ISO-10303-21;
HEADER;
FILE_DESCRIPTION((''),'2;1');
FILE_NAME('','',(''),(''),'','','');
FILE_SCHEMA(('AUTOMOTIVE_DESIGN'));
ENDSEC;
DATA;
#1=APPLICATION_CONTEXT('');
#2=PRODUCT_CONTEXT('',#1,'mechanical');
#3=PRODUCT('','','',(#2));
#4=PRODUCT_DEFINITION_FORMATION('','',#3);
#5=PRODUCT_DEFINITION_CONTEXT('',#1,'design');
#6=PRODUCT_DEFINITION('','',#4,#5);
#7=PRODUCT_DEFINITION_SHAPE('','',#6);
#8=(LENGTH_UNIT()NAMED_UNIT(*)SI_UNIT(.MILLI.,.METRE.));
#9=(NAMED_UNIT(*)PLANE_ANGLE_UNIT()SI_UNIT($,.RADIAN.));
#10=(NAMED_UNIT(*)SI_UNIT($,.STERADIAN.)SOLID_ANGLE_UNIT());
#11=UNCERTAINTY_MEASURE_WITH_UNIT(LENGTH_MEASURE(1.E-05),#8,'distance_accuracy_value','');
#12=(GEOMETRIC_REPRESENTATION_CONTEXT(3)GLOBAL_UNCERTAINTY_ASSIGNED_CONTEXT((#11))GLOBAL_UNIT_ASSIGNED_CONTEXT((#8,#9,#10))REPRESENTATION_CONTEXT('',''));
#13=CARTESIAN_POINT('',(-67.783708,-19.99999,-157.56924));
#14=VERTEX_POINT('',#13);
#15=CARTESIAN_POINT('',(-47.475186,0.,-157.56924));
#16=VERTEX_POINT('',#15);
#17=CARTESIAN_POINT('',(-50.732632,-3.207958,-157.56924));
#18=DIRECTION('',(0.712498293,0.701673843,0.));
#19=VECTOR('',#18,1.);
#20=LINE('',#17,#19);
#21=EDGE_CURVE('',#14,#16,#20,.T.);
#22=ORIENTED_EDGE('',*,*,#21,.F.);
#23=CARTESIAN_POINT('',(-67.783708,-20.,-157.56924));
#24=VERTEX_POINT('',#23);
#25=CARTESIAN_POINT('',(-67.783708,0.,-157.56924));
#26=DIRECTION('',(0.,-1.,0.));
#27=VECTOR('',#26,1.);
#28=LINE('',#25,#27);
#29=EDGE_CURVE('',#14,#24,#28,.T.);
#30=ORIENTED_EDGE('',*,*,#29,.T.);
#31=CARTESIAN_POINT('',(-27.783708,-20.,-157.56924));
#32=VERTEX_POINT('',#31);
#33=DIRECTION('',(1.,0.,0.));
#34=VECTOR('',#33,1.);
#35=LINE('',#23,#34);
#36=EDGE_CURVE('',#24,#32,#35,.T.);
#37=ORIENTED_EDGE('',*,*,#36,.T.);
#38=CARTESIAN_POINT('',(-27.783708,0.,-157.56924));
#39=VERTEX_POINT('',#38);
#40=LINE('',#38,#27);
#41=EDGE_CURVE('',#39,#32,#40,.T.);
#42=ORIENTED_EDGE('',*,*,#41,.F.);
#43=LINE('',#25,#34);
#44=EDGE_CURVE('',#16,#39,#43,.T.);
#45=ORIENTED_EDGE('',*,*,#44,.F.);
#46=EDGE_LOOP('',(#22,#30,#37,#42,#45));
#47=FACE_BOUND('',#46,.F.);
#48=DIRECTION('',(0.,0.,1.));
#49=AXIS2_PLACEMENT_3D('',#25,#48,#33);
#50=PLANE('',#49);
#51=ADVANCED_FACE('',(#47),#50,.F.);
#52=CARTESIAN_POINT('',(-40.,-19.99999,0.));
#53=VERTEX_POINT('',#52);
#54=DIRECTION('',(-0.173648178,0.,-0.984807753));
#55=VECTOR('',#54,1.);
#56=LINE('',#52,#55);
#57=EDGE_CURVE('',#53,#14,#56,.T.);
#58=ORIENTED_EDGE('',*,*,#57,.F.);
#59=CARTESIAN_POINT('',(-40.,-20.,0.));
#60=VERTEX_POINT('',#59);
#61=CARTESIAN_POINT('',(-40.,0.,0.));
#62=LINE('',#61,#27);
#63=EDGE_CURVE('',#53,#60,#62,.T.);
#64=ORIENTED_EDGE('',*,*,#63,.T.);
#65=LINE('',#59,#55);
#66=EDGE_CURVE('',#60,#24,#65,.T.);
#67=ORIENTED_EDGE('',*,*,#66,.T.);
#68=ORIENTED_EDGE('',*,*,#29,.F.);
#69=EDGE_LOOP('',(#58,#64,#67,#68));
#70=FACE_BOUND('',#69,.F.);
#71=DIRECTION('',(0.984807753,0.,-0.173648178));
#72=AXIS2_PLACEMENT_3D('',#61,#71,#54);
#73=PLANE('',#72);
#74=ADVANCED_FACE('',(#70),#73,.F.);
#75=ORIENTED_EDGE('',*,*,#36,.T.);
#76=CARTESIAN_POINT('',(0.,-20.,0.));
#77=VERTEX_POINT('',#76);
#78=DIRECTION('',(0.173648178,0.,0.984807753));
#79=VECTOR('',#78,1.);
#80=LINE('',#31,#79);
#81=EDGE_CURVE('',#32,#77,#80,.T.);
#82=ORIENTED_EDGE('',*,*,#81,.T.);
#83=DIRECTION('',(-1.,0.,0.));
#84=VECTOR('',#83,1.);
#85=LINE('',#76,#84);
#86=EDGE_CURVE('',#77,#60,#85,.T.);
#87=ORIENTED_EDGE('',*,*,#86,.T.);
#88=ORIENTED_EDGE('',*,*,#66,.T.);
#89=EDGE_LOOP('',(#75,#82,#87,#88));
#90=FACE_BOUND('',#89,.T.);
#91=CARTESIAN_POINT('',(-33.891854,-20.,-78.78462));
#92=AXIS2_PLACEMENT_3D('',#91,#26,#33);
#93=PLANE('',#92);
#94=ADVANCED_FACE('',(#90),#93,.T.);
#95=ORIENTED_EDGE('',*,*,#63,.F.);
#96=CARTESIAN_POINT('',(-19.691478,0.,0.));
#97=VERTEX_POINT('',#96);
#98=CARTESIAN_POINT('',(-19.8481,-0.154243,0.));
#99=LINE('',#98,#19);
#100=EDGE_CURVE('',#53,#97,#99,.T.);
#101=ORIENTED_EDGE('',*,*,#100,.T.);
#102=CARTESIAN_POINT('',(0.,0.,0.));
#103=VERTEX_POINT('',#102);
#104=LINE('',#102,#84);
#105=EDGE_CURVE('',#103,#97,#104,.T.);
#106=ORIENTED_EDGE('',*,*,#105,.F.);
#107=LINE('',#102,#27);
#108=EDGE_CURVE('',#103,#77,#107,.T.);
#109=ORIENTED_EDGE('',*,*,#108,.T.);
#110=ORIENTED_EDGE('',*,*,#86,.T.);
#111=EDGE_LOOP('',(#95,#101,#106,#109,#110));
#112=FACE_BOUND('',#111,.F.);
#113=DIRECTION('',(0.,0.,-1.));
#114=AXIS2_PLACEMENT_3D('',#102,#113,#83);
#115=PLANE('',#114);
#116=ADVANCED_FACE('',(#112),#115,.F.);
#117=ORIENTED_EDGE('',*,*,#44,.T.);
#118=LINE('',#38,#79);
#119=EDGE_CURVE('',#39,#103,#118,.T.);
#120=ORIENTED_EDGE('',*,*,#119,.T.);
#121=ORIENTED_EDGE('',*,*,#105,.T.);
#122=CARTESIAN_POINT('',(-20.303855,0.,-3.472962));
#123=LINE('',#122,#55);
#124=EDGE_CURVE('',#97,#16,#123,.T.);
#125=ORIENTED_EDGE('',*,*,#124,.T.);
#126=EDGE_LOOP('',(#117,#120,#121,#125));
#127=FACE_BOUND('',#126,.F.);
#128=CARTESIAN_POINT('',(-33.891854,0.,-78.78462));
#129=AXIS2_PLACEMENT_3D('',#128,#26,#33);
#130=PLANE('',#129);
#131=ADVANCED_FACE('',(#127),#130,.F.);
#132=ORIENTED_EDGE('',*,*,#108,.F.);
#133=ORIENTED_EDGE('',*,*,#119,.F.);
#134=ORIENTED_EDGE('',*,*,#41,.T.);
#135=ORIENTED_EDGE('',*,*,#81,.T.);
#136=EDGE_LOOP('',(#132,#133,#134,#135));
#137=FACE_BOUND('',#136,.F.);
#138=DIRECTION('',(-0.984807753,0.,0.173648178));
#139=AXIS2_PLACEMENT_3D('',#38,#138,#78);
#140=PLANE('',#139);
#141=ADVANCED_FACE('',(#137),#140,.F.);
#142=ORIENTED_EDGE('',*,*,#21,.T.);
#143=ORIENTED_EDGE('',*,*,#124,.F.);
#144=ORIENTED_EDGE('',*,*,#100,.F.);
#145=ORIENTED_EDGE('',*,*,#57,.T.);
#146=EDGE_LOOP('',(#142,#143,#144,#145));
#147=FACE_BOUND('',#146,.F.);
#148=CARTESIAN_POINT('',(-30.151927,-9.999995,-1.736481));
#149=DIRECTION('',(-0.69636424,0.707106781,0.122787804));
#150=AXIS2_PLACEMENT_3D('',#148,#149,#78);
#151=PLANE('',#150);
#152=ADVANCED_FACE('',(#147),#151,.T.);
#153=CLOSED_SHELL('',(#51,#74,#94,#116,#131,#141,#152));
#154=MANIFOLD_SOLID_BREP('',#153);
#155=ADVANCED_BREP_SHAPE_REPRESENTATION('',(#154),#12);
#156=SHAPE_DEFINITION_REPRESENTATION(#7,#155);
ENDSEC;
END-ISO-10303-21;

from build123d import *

# Parameters (mm, degrees)
F1_DEPTH = 20
F2_SIZE  = 19.99999


# Not quite as in the source:
# - a fillet or chamfer is up to 0.001 mm smaller than in the source, because OpenCascade refuses the exact size


with BuildPart() as f1:
    # F0 (on Front) → F1 (new body)
    with BuildSketch(Plane.XZ):
        Polygon((-27.7837084267, -157.569240482), (0, 0), (-40, 0), (-67.7837084267, -157.569240482), align=None)
    extrude(amount=F1_DEPTH)

    # F2 (size 20 in the source; OpenCascade refuses exactly that, so slightly less here)
    f2_edges = [f1.edges().sort_by_distance(p)[0] for p in [
        (-53.891854, 0, -78.78462),
    ]]
    chamfer(f2_edges, length=F2_SIZE)


solid = f1.part
